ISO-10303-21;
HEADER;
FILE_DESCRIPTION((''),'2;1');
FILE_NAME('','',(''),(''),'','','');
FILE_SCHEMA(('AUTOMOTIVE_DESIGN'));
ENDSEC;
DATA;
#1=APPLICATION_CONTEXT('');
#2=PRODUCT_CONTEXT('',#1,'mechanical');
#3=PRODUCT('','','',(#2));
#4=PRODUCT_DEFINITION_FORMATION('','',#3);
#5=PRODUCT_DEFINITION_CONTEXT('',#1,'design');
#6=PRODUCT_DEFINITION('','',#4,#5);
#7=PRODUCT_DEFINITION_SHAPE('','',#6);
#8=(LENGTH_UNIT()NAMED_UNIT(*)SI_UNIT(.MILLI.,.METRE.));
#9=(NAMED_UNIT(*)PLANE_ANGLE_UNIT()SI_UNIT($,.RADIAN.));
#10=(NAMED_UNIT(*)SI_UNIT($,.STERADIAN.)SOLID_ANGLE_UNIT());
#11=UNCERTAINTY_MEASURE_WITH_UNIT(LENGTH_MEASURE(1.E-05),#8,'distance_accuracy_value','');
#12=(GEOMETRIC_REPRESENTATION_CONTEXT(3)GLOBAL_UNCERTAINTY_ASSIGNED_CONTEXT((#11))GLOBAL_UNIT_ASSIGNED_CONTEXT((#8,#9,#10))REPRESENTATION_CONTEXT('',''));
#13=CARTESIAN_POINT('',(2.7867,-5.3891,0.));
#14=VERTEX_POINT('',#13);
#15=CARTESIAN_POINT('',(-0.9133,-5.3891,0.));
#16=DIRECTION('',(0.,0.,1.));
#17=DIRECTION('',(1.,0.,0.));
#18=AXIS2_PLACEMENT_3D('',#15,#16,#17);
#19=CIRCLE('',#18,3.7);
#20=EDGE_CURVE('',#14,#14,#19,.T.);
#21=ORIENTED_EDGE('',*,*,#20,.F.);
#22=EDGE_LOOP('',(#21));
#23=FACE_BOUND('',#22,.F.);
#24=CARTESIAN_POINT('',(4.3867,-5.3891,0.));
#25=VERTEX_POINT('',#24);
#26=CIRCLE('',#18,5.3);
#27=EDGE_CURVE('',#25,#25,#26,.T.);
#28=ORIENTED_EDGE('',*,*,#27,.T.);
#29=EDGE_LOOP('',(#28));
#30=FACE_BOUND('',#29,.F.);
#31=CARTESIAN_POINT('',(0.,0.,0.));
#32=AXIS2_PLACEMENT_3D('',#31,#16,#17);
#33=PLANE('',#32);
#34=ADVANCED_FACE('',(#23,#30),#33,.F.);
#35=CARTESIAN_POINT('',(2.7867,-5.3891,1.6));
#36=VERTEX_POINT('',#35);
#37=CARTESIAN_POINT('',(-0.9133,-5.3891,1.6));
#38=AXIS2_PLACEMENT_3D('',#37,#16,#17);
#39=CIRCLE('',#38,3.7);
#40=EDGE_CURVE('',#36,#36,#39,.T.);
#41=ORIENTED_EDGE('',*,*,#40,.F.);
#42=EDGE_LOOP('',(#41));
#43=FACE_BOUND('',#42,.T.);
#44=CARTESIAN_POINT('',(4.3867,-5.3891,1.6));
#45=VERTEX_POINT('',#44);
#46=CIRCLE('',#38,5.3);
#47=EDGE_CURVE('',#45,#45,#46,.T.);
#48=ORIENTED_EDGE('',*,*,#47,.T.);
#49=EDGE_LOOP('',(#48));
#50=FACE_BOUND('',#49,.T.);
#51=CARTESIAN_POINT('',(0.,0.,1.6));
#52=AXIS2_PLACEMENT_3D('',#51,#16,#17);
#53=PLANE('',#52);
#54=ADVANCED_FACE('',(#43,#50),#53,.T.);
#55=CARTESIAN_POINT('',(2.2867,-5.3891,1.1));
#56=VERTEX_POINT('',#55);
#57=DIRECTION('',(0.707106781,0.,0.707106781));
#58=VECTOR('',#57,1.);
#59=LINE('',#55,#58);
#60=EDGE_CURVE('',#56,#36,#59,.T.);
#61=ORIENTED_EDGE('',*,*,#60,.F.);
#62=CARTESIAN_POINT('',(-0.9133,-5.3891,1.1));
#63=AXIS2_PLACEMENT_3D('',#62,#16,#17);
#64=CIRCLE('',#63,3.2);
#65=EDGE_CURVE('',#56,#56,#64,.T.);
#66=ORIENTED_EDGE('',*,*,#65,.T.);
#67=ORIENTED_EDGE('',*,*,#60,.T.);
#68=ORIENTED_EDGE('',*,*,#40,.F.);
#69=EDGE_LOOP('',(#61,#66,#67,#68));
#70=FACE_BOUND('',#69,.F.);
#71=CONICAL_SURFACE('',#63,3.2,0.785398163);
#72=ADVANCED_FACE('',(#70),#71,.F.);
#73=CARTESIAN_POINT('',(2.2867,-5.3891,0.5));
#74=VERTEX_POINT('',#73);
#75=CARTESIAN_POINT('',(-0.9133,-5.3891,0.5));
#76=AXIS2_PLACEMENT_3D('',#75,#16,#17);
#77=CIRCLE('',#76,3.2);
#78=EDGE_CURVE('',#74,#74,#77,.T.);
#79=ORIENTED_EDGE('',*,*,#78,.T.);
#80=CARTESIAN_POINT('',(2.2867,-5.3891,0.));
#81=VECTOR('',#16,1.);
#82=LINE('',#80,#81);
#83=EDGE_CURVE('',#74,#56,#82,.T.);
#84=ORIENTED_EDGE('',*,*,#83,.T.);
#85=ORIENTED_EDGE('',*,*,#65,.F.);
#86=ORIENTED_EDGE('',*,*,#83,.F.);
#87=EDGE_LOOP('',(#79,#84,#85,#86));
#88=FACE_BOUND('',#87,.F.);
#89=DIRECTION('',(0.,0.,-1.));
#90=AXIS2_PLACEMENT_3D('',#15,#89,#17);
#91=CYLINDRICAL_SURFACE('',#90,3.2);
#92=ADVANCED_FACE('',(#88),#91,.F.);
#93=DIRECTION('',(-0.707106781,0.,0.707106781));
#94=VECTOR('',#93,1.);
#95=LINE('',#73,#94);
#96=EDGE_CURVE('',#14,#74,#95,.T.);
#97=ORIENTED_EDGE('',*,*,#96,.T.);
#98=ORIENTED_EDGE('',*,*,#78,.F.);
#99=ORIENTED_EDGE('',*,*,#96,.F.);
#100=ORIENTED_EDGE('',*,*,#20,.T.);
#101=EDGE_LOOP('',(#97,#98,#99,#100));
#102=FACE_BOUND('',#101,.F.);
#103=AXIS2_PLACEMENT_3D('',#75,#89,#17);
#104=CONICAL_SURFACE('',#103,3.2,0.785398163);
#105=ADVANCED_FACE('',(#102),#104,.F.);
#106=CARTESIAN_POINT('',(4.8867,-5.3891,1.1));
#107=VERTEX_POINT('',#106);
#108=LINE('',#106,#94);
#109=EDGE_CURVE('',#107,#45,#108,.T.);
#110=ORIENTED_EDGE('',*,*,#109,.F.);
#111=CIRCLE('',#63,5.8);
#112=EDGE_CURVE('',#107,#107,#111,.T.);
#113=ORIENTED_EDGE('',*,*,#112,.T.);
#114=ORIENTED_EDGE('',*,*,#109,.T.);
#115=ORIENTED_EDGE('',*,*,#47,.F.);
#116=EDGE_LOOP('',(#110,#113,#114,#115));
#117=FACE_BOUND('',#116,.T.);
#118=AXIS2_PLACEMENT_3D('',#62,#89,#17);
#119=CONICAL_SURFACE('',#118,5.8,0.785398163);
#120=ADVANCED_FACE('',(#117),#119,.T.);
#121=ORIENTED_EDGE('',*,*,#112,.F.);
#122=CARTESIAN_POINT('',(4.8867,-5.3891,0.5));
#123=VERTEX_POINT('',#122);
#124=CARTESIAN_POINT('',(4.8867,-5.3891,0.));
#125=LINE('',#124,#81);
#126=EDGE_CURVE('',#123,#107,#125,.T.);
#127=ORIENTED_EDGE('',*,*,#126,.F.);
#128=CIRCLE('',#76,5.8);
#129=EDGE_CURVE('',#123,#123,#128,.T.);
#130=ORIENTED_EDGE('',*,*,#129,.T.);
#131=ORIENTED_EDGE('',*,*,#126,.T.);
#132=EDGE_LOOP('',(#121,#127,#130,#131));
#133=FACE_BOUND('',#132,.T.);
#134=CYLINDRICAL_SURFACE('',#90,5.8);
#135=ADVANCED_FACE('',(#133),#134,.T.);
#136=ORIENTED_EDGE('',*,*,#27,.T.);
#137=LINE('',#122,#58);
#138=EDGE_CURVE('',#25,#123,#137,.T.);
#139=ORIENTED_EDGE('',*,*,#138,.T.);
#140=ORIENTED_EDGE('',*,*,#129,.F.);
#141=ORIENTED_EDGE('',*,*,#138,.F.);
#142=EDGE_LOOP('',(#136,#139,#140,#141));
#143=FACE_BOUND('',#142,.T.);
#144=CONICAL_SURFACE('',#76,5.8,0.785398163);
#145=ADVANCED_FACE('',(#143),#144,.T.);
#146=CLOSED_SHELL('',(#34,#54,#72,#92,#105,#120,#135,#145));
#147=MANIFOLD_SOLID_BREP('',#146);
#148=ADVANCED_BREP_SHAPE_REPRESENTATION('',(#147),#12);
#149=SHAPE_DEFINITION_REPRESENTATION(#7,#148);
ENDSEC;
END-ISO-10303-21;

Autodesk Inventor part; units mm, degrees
ref_plane "YZ Plane" through (0, 0, 0) normal (1, 0, 0) x (0, 1, 0)
ref_plane "XZ Plane" through (0, 0, 0) normal (0, 1, 0) x (-1, 0, 0)
ref_plane "XY Plane" through (0, 0, 0) normal (0, 0, 1) x (1, 0, 0)
ref_plane "Work Plane1" through (0, 0, 0) normal (0, 0, 1) x (1, 0, 0)
sketch "Sketch1" plane through (0, 0, 0) normal (0, 0, 1) x (1, 0, 0)
  circle A0 centre (-0.9133, -5.3891) radius 4 projected
  circle A1 centre (-0.9133, -5.3891) radius 3.8536 projected
  circle A2 centre (-0.9133, -5.3891) radius 5.8
  circle A3 centre (-0.9133, -5.3891) radius 3.2
  point P0 (0, 0)
  dimension "d0" = 1.8
  dimension "d6" = 6.4
extrude "Extrusion1" add sketch "Sketch1" along normal blind 1.6 contours A0 | A1 | A2
chamfer "Chamfer1" distance 0.5 angle 45 2 edges at (-6.7133, -5.3891, 1.6) (-6.7133, -5.3891, 0)
chamfer "Chamfer2" distance 0.5 angle 45 2 edges at (-4.1133, -5.3891, 0) (-4.1133, -5.3891, 1.6)
properties part number "washers"
